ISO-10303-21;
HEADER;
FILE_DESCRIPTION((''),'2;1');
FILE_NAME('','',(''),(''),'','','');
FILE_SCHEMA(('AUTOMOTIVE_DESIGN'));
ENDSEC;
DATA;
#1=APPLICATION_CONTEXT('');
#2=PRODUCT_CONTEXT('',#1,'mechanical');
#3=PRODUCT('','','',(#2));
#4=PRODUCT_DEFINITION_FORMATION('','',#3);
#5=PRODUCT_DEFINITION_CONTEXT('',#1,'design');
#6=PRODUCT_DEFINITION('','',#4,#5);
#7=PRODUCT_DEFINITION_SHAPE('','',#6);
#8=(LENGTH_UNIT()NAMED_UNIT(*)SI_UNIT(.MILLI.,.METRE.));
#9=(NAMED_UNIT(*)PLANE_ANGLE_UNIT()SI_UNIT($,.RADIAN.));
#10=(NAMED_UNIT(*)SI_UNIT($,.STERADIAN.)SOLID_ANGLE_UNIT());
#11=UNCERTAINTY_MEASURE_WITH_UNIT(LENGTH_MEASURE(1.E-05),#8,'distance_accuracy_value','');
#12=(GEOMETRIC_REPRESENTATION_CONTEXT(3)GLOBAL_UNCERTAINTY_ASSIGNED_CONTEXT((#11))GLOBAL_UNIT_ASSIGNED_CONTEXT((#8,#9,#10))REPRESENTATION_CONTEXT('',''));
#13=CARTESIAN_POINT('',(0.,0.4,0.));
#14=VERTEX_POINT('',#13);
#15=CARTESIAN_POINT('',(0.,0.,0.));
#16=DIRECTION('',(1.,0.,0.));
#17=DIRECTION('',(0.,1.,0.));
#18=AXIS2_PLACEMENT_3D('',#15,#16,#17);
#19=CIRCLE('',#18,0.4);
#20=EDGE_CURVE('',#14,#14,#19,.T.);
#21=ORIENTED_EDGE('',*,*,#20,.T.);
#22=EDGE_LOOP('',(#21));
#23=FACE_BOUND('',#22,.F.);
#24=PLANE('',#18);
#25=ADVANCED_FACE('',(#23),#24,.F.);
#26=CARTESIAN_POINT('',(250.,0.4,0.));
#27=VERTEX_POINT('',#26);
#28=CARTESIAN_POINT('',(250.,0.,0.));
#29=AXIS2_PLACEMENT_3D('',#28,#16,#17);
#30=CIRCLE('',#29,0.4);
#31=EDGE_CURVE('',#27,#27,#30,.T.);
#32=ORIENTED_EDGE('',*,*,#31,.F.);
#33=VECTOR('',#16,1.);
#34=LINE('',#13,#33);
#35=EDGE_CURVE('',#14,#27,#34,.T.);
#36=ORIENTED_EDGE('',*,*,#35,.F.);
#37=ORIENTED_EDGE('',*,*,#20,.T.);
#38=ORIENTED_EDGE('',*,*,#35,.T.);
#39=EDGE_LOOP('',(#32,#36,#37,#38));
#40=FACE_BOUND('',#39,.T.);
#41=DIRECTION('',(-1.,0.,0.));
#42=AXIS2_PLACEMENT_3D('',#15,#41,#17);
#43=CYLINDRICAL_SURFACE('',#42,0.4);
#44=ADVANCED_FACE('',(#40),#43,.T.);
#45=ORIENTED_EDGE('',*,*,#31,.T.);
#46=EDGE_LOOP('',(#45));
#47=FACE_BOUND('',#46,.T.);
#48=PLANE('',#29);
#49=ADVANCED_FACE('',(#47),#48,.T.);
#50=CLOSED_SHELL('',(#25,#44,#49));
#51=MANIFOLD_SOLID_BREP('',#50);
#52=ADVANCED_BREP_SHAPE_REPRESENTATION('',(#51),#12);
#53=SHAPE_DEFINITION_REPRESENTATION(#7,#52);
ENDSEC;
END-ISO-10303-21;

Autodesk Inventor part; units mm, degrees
ref_plane "YZ Plane" through (0, 0, 0) normal (1, 0, 0) x (0, 1, 0)
ref_plane "XZ Plane" through (0, 0, 0) normal (0, 1, 0) x (-1, 0, 0)
ref_plane "XY Plane" through (0, 0, 0) normal (0, 0, 1) x (1, 0, 0)
sketch "Skizze1" plane through (0, 0, 0) normal (1, 0, 0) x (0, 1, 0)
  circle A0 centre (0, 0) radius 0.4
  dimension "d0" = 0.8
extrude "Extrusion1" add sketch "Skizze1" along normal blind 250
properties part number "WireCathode" material "Aluminium 6061"
